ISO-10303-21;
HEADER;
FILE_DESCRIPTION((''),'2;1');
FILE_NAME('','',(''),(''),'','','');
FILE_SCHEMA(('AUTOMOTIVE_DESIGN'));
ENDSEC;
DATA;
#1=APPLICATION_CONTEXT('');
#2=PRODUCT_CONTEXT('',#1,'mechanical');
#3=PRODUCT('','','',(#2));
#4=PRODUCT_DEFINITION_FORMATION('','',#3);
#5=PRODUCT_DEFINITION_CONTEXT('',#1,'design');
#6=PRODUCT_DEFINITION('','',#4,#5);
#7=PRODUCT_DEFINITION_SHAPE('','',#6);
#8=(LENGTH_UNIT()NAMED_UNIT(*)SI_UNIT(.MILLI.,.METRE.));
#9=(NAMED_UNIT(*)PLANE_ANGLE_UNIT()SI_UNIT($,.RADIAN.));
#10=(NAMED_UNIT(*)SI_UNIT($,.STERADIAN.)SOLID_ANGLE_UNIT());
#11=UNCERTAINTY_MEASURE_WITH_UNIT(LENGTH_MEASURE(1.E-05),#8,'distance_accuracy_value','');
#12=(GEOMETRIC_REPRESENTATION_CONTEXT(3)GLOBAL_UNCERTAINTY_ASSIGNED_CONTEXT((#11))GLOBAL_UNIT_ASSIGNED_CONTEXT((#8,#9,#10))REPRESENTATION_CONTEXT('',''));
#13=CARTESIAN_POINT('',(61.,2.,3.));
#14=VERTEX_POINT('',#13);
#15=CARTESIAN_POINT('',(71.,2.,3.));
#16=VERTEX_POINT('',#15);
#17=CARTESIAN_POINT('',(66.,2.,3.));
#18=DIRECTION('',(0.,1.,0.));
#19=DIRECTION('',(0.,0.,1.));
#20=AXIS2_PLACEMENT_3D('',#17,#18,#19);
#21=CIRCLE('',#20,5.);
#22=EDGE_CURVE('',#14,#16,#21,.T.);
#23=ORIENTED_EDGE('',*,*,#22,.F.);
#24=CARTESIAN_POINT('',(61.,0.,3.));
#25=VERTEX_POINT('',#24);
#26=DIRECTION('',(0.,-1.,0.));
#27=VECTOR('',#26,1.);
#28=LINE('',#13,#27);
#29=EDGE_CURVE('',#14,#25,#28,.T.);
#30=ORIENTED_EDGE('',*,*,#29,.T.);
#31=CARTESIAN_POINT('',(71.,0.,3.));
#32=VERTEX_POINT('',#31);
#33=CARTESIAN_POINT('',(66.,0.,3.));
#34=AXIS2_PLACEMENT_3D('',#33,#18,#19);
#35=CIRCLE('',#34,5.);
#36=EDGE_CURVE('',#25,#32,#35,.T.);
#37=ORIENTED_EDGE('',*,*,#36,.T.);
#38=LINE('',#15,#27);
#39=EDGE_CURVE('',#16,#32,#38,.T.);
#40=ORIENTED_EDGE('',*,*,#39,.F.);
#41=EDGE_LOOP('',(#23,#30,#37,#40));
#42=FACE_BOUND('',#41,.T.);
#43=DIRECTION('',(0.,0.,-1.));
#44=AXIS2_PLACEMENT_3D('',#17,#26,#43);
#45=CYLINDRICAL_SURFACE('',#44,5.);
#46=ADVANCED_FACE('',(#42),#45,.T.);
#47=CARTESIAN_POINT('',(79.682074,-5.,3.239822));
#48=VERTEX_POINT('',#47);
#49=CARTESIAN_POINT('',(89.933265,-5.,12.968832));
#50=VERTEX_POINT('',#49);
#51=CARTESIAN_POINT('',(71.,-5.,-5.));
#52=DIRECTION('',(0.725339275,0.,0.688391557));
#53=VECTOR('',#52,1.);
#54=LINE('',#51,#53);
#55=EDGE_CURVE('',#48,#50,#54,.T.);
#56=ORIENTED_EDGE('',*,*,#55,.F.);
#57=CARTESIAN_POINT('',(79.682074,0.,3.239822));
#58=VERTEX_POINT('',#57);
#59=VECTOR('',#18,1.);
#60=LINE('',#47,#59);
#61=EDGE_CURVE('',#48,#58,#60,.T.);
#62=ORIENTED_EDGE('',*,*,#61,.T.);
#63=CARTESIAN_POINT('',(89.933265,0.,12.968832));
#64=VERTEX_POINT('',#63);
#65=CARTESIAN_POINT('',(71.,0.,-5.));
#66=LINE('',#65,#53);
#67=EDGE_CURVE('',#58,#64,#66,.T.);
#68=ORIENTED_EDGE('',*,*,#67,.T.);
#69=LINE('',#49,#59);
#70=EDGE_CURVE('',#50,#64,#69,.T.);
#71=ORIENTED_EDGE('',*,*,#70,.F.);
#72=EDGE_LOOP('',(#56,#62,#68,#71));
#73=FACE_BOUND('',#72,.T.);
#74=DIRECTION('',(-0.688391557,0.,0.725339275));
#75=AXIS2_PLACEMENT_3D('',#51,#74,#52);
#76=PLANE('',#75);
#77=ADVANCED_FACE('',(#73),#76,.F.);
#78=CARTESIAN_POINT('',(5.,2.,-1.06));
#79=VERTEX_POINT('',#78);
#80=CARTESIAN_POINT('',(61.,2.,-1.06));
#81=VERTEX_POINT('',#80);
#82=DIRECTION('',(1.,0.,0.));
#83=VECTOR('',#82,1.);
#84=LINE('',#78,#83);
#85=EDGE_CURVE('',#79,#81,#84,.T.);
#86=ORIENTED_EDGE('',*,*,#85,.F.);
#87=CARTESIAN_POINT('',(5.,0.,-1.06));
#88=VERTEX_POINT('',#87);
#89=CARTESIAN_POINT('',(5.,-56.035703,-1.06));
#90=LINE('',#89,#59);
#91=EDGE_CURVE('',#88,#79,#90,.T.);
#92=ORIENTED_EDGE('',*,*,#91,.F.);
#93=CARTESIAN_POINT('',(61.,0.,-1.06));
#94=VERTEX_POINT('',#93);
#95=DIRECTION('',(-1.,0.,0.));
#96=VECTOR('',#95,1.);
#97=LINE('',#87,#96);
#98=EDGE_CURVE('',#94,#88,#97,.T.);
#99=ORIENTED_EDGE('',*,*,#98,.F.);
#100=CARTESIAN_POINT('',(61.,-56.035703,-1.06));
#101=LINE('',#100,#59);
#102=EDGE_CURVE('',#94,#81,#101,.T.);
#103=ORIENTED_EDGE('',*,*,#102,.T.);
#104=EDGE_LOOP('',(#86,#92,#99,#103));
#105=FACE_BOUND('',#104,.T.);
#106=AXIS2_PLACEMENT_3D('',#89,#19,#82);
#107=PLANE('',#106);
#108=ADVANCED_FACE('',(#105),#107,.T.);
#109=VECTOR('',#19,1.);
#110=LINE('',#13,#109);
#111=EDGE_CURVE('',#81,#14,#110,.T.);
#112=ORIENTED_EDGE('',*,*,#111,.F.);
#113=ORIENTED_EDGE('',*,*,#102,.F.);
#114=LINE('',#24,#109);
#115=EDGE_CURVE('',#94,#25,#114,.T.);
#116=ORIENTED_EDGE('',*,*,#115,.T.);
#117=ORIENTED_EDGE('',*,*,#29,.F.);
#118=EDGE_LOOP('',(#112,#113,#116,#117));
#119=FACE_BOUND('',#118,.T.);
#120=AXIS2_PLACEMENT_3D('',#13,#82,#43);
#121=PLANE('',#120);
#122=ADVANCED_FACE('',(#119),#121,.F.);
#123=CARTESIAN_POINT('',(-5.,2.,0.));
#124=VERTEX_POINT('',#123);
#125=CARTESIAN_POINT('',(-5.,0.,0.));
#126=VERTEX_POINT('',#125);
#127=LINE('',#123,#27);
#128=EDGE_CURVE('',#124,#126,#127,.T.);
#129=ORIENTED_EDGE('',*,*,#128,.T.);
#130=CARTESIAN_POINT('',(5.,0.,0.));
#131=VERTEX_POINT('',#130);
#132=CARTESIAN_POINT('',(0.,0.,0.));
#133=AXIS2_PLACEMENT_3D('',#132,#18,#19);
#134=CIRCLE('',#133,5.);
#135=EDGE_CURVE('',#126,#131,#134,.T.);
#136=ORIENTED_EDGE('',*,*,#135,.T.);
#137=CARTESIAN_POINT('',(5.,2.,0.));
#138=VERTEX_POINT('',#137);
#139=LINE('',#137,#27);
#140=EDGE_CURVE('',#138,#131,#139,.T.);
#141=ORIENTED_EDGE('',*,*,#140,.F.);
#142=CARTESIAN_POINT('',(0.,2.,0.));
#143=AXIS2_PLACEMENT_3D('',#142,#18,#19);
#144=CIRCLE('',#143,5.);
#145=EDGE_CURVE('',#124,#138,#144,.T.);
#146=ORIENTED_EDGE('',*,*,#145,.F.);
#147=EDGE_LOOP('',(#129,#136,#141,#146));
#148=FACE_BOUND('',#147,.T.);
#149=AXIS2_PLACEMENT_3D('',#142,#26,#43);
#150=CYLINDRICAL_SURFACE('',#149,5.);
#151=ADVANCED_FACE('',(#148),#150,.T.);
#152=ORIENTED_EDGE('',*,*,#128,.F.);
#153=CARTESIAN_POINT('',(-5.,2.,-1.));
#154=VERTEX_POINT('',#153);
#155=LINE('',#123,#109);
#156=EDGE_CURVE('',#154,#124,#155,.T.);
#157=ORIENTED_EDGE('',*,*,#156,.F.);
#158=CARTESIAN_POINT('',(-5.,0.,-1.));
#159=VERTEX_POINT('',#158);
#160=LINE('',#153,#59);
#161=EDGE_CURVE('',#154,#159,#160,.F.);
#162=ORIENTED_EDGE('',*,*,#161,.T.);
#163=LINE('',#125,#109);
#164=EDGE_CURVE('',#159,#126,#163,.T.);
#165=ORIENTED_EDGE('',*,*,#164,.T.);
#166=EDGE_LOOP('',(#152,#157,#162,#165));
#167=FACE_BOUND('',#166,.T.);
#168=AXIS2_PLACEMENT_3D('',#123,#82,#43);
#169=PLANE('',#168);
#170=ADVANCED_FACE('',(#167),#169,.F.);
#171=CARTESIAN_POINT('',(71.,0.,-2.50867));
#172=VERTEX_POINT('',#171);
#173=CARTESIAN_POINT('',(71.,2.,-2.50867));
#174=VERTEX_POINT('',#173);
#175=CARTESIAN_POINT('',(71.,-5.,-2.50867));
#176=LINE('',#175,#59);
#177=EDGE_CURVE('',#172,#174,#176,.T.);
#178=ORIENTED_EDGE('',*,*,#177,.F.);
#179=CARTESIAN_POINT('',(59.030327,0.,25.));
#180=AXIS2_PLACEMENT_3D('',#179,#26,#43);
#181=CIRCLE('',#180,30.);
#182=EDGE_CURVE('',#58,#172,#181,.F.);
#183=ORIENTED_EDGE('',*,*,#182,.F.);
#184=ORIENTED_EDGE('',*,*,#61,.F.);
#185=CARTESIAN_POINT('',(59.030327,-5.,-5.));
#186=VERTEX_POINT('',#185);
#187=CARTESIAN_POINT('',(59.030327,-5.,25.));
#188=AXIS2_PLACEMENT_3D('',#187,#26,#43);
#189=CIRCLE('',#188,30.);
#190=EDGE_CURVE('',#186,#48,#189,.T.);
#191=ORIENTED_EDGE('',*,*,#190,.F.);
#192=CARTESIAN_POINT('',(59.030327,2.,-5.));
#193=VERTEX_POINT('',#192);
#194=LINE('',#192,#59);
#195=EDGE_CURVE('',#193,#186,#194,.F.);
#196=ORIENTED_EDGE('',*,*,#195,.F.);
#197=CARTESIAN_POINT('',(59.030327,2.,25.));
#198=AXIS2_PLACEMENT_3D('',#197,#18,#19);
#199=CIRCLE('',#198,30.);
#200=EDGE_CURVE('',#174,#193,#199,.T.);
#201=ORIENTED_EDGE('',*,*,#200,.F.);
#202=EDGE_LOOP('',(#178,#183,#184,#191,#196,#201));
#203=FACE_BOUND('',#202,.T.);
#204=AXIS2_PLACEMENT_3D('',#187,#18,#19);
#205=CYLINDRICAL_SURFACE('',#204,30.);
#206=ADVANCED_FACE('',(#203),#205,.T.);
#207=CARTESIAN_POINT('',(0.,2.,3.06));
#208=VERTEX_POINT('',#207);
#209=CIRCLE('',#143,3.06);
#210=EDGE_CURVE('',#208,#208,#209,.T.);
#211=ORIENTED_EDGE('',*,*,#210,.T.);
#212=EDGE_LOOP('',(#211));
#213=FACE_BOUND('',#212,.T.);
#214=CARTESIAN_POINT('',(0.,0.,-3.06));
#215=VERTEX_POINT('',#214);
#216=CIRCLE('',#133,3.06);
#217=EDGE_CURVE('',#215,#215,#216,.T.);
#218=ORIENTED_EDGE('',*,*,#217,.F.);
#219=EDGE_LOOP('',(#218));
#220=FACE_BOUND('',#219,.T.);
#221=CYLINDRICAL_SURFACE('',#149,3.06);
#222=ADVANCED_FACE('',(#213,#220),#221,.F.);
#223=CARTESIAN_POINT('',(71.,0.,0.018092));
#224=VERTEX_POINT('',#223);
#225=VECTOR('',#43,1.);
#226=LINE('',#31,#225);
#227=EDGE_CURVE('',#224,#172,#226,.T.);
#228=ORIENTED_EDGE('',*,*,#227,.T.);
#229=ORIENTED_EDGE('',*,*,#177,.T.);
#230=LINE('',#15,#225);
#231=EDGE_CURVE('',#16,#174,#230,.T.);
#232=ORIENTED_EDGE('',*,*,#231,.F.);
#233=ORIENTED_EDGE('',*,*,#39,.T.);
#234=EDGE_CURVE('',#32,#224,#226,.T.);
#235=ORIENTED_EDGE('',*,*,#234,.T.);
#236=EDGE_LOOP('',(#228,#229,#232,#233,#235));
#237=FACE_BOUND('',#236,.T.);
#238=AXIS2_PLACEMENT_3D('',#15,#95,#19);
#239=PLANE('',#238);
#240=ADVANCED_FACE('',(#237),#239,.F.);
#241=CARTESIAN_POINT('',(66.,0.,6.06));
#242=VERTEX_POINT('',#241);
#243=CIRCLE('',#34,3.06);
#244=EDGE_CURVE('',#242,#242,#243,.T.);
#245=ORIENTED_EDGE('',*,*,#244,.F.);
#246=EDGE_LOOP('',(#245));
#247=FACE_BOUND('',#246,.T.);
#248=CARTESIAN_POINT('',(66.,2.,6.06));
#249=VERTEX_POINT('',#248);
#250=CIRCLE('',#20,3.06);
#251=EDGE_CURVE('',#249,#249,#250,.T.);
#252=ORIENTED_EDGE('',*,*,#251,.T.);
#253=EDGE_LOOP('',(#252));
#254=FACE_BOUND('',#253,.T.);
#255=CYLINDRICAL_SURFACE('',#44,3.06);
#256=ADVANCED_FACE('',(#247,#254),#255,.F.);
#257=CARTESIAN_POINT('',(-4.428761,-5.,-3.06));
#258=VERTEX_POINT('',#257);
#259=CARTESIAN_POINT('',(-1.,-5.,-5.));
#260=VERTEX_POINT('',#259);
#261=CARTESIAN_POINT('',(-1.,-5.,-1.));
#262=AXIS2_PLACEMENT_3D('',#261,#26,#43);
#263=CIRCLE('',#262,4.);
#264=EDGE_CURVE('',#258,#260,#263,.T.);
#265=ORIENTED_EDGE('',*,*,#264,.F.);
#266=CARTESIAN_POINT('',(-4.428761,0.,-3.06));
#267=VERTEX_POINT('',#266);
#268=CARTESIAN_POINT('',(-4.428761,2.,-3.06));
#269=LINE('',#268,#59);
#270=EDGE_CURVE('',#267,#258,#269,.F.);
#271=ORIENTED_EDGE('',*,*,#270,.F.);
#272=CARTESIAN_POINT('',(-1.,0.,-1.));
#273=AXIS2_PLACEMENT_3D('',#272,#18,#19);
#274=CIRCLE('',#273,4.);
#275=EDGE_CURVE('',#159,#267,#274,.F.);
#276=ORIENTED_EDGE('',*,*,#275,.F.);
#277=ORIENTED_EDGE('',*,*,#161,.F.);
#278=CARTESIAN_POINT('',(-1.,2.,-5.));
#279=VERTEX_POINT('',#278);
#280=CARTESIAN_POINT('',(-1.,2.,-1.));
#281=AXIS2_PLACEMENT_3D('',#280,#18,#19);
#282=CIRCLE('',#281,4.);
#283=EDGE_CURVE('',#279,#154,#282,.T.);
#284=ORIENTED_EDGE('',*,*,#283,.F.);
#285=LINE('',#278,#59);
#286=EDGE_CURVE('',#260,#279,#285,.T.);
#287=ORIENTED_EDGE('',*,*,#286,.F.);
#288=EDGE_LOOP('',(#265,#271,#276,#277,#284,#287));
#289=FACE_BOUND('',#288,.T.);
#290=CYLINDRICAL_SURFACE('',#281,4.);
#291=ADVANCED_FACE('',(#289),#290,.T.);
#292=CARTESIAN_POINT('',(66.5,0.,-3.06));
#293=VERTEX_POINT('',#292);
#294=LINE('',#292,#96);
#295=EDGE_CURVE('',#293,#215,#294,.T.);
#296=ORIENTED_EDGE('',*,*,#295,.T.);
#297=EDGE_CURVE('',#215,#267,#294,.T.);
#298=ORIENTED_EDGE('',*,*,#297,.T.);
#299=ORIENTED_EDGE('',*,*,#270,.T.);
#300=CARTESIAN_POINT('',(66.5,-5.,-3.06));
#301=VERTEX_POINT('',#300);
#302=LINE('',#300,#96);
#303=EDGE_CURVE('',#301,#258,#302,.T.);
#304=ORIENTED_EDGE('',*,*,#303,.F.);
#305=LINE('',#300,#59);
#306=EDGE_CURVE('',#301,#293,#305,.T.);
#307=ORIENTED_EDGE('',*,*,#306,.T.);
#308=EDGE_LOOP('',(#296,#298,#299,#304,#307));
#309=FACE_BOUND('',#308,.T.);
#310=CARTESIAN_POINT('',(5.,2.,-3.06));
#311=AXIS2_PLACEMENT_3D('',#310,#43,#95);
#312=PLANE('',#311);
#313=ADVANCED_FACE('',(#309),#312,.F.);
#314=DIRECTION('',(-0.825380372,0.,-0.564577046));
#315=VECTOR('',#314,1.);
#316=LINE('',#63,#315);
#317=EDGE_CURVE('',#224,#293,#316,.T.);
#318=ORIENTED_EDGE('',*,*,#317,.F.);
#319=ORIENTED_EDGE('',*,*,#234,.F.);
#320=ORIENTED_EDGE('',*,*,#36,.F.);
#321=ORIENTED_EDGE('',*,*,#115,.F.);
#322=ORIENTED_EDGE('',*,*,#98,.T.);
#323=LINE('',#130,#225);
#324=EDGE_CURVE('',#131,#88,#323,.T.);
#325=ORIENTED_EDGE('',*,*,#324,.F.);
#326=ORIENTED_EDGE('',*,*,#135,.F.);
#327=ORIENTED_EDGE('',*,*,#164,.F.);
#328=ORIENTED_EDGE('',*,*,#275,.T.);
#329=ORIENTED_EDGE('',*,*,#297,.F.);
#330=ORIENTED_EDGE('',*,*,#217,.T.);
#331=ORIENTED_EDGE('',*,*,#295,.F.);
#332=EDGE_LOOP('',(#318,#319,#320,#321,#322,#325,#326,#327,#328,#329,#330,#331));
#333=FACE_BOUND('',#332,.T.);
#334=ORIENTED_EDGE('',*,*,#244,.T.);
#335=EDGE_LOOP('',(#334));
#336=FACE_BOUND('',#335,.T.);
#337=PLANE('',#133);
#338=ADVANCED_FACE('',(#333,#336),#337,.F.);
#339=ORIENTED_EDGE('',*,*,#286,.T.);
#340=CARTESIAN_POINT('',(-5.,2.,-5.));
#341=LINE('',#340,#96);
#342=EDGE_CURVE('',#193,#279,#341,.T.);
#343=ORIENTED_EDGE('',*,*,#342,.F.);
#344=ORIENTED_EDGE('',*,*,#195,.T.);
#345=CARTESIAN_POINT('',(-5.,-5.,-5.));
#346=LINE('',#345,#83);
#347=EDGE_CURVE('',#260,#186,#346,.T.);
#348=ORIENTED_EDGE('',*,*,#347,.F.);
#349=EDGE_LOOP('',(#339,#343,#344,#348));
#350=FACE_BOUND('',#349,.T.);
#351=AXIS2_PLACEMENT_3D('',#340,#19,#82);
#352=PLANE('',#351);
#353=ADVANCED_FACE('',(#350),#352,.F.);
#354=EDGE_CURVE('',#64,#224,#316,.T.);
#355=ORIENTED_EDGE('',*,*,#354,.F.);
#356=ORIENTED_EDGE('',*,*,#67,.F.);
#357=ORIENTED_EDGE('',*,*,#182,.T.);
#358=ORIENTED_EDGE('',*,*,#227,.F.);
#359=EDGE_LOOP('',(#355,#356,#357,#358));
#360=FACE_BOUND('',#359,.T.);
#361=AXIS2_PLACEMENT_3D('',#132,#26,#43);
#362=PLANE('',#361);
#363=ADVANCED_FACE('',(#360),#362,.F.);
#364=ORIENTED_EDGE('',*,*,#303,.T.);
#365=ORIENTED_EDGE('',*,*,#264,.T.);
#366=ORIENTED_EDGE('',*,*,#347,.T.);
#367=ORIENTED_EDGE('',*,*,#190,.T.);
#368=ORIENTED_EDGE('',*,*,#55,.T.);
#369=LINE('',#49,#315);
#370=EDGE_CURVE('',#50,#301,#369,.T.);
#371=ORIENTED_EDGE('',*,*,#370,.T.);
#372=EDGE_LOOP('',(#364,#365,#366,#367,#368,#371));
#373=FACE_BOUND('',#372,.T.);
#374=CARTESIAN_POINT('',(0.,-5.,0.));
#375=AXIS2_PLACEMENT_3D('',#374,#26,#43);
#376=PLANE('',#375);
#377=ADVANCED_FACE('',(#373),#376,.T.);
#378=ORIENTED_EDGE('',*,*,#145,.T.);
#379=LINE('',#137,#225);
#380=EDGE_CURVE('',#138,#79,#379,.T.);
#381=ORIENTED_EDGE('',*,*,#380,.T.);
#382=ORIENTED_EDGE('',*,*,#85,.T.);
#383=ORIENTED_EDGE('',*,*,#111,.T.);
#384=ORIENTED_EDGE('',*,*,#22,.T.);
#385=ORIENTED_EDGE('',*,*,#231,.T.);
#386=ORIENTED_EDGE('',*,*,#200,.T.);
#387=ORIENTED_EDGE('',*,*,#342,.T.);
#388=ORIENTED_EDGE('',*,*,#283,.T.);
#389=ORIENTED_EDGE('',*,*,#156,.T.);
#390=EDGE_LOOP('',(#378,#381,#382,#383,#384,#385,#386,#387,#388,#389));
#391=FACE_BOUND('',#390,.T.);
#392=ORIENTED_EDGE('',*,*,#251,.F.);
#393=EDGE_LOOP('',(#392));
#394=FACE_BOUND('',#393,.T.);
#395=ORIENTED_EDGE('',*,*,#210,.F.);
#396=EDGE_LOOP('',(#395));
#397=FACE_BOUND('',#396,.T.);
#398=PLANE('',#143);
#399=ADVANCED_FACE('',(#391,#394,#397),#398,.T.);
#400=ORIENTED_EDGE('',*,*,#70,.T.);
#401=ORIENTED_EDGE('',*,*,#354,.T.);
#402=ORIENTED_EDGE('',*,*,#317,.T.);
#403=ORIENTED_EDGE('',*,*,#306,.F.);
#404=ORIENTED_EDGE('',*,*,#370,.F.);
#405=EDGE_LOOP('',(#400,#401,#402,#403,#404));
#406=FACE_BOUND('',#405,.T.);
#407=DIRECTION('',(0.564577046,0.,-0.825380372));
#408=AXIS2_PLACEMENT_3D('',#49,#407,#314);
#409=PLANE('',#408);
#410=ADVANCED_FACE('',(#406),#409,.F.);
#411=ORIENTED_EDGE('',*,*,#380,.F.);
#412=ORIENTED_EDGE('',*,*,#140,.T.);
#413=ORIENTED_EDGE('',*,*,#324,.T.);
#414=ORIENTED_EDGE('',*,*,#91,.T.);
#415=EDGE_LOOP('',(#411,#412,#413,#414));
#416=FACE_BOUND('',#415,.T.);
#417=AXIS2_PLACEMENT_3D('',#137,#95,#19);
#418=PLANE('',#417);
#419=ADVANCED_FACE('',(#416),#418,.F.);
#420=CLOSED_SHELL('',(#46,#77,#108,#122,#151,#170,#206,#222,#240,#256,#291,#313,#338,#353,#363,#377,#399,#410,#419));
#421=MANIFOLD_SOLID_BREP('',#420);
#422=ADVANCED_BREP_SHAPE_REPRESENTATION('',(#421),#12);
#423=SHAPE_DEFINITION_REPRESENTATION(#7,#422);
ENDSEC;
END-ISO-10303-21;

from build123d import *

# Parameters (mm, degrees)
SKETCH1_R           = 3.06
BOSS_EXTRUDE1_DEPTH = 2
BOSS_EXTRUDE3_DEPTH = 5
SKETCH6_W           = 56
SKETCH6_H           = 2
BOSS_EXTRUDE4_DEPTH = 2
FILLET2_R           = 30
FILLET3_R           = 4


with BuildPart() as part:
    # Sketch1 → Boss-Extrude1 (new body)
    with BuildSketch(Plane(origin=(0, 0, 0), x_dir=(1, 0, 0), z_dir=(0, 1, 0))):
        with BuildLine():
            Line((-5, 0), (-5, 5))
            Line((-5, 5), (71, 5))
            Line((71, 5), (71, -3))
            ThreePointArc((71, -3), (66, -8), (61, -3))
            Line((61, -3), (61, 3.06))
            Line((61, 3.06), (5, 3.06))
            Line((5, 3.06), (5, 0))
            ThreePointArc((5, 0), (0, -5), (-5, 0))
        make_face()
        with Locations(Location((0, 0, 0), (0, 0, 270))):
            Circle(SKETCH1_R, mode=Mode.SUBTRACT)
        with Locations(Location((66, -3, 0), (0, 0, 270))):
            Circle(SKETCH1_R, mode=Mode.SUBTRACT)
    extrude(amount=BOSS_EXTRUDE1_DEPTH)

    # Sketch4 → Boss-Extrude3 (add)
    with BuildSketch(Plane(origin=(0, 0, 0), x_dir=(-1, 0, 0), z_dir=(0, -1, 0))):
        Polygon((5, 5), (-71, 5), (-89.933264969, -12.968832246), (-66.5, 3.06), (5, 3.06), align=None)
    extrude(amount=BOSS_EXTRUDE3_DEPTH)

    # Sketch6 → Boss-Extrude4 (add)
    with BuildSketch(Plane(origin=(0, 2, 0), x_dir=(1, 0, 0), z_dir=(0, 1, 0))):
        with Locations((33, 2.06)):
            Rectangle(SKETCH6_W, SKETCH6_H)
    extrude(amount=-BOSS_EXTRUDE4_DEPTH)

    # Fillet2
    # the kernel refuses this fillet: 30 mm, written as the material it takes off along each edge
    with BuildSketch(Plane(origin=(71, 29.924182181, -5), x_dir=(0.7253392750671382, 0, 0.6883915572151349), z_dir=(0, -1, 0))) as fillet2_piece_1:
        with BuildLine():
            CenterArc((FILLET2_R * 0.398989095747, FILLET2_R), FILLET2_R, 226.497078838, 43.502921162)
            Line((-FILLET2_R * 0.289402461469, FILLET2_R * 0.274660724933), (0, 0))
            Line((0, 0), (FILLET2_R * 0.398989095747, 0))
        make_face()
    extrude(amount=64.848364362, mode=Mode.SUBTRACT)

    # Fillet3
    # the kernel refuses this fillet: 4 mm, written as the material it takes off along each edge
    with BuildSketch(Plane(origin=(-5, 12, -5), x_dir=(0, 0, 1), z_dir=(0, -1, 0))) as fillet3_piece_1:
        with BuildLine():
            CenterArc((FILLET3_R, -FILLET3_R), FILLET3_R, 90, 90)
            Line((0, -FILLET3_R), (0, 0))
            Line((0, 0), (FILLET3_R, 0))
        make_face()
    extrude(amount=27, mode=Mode.SUBTRACT)


solid = part.part
